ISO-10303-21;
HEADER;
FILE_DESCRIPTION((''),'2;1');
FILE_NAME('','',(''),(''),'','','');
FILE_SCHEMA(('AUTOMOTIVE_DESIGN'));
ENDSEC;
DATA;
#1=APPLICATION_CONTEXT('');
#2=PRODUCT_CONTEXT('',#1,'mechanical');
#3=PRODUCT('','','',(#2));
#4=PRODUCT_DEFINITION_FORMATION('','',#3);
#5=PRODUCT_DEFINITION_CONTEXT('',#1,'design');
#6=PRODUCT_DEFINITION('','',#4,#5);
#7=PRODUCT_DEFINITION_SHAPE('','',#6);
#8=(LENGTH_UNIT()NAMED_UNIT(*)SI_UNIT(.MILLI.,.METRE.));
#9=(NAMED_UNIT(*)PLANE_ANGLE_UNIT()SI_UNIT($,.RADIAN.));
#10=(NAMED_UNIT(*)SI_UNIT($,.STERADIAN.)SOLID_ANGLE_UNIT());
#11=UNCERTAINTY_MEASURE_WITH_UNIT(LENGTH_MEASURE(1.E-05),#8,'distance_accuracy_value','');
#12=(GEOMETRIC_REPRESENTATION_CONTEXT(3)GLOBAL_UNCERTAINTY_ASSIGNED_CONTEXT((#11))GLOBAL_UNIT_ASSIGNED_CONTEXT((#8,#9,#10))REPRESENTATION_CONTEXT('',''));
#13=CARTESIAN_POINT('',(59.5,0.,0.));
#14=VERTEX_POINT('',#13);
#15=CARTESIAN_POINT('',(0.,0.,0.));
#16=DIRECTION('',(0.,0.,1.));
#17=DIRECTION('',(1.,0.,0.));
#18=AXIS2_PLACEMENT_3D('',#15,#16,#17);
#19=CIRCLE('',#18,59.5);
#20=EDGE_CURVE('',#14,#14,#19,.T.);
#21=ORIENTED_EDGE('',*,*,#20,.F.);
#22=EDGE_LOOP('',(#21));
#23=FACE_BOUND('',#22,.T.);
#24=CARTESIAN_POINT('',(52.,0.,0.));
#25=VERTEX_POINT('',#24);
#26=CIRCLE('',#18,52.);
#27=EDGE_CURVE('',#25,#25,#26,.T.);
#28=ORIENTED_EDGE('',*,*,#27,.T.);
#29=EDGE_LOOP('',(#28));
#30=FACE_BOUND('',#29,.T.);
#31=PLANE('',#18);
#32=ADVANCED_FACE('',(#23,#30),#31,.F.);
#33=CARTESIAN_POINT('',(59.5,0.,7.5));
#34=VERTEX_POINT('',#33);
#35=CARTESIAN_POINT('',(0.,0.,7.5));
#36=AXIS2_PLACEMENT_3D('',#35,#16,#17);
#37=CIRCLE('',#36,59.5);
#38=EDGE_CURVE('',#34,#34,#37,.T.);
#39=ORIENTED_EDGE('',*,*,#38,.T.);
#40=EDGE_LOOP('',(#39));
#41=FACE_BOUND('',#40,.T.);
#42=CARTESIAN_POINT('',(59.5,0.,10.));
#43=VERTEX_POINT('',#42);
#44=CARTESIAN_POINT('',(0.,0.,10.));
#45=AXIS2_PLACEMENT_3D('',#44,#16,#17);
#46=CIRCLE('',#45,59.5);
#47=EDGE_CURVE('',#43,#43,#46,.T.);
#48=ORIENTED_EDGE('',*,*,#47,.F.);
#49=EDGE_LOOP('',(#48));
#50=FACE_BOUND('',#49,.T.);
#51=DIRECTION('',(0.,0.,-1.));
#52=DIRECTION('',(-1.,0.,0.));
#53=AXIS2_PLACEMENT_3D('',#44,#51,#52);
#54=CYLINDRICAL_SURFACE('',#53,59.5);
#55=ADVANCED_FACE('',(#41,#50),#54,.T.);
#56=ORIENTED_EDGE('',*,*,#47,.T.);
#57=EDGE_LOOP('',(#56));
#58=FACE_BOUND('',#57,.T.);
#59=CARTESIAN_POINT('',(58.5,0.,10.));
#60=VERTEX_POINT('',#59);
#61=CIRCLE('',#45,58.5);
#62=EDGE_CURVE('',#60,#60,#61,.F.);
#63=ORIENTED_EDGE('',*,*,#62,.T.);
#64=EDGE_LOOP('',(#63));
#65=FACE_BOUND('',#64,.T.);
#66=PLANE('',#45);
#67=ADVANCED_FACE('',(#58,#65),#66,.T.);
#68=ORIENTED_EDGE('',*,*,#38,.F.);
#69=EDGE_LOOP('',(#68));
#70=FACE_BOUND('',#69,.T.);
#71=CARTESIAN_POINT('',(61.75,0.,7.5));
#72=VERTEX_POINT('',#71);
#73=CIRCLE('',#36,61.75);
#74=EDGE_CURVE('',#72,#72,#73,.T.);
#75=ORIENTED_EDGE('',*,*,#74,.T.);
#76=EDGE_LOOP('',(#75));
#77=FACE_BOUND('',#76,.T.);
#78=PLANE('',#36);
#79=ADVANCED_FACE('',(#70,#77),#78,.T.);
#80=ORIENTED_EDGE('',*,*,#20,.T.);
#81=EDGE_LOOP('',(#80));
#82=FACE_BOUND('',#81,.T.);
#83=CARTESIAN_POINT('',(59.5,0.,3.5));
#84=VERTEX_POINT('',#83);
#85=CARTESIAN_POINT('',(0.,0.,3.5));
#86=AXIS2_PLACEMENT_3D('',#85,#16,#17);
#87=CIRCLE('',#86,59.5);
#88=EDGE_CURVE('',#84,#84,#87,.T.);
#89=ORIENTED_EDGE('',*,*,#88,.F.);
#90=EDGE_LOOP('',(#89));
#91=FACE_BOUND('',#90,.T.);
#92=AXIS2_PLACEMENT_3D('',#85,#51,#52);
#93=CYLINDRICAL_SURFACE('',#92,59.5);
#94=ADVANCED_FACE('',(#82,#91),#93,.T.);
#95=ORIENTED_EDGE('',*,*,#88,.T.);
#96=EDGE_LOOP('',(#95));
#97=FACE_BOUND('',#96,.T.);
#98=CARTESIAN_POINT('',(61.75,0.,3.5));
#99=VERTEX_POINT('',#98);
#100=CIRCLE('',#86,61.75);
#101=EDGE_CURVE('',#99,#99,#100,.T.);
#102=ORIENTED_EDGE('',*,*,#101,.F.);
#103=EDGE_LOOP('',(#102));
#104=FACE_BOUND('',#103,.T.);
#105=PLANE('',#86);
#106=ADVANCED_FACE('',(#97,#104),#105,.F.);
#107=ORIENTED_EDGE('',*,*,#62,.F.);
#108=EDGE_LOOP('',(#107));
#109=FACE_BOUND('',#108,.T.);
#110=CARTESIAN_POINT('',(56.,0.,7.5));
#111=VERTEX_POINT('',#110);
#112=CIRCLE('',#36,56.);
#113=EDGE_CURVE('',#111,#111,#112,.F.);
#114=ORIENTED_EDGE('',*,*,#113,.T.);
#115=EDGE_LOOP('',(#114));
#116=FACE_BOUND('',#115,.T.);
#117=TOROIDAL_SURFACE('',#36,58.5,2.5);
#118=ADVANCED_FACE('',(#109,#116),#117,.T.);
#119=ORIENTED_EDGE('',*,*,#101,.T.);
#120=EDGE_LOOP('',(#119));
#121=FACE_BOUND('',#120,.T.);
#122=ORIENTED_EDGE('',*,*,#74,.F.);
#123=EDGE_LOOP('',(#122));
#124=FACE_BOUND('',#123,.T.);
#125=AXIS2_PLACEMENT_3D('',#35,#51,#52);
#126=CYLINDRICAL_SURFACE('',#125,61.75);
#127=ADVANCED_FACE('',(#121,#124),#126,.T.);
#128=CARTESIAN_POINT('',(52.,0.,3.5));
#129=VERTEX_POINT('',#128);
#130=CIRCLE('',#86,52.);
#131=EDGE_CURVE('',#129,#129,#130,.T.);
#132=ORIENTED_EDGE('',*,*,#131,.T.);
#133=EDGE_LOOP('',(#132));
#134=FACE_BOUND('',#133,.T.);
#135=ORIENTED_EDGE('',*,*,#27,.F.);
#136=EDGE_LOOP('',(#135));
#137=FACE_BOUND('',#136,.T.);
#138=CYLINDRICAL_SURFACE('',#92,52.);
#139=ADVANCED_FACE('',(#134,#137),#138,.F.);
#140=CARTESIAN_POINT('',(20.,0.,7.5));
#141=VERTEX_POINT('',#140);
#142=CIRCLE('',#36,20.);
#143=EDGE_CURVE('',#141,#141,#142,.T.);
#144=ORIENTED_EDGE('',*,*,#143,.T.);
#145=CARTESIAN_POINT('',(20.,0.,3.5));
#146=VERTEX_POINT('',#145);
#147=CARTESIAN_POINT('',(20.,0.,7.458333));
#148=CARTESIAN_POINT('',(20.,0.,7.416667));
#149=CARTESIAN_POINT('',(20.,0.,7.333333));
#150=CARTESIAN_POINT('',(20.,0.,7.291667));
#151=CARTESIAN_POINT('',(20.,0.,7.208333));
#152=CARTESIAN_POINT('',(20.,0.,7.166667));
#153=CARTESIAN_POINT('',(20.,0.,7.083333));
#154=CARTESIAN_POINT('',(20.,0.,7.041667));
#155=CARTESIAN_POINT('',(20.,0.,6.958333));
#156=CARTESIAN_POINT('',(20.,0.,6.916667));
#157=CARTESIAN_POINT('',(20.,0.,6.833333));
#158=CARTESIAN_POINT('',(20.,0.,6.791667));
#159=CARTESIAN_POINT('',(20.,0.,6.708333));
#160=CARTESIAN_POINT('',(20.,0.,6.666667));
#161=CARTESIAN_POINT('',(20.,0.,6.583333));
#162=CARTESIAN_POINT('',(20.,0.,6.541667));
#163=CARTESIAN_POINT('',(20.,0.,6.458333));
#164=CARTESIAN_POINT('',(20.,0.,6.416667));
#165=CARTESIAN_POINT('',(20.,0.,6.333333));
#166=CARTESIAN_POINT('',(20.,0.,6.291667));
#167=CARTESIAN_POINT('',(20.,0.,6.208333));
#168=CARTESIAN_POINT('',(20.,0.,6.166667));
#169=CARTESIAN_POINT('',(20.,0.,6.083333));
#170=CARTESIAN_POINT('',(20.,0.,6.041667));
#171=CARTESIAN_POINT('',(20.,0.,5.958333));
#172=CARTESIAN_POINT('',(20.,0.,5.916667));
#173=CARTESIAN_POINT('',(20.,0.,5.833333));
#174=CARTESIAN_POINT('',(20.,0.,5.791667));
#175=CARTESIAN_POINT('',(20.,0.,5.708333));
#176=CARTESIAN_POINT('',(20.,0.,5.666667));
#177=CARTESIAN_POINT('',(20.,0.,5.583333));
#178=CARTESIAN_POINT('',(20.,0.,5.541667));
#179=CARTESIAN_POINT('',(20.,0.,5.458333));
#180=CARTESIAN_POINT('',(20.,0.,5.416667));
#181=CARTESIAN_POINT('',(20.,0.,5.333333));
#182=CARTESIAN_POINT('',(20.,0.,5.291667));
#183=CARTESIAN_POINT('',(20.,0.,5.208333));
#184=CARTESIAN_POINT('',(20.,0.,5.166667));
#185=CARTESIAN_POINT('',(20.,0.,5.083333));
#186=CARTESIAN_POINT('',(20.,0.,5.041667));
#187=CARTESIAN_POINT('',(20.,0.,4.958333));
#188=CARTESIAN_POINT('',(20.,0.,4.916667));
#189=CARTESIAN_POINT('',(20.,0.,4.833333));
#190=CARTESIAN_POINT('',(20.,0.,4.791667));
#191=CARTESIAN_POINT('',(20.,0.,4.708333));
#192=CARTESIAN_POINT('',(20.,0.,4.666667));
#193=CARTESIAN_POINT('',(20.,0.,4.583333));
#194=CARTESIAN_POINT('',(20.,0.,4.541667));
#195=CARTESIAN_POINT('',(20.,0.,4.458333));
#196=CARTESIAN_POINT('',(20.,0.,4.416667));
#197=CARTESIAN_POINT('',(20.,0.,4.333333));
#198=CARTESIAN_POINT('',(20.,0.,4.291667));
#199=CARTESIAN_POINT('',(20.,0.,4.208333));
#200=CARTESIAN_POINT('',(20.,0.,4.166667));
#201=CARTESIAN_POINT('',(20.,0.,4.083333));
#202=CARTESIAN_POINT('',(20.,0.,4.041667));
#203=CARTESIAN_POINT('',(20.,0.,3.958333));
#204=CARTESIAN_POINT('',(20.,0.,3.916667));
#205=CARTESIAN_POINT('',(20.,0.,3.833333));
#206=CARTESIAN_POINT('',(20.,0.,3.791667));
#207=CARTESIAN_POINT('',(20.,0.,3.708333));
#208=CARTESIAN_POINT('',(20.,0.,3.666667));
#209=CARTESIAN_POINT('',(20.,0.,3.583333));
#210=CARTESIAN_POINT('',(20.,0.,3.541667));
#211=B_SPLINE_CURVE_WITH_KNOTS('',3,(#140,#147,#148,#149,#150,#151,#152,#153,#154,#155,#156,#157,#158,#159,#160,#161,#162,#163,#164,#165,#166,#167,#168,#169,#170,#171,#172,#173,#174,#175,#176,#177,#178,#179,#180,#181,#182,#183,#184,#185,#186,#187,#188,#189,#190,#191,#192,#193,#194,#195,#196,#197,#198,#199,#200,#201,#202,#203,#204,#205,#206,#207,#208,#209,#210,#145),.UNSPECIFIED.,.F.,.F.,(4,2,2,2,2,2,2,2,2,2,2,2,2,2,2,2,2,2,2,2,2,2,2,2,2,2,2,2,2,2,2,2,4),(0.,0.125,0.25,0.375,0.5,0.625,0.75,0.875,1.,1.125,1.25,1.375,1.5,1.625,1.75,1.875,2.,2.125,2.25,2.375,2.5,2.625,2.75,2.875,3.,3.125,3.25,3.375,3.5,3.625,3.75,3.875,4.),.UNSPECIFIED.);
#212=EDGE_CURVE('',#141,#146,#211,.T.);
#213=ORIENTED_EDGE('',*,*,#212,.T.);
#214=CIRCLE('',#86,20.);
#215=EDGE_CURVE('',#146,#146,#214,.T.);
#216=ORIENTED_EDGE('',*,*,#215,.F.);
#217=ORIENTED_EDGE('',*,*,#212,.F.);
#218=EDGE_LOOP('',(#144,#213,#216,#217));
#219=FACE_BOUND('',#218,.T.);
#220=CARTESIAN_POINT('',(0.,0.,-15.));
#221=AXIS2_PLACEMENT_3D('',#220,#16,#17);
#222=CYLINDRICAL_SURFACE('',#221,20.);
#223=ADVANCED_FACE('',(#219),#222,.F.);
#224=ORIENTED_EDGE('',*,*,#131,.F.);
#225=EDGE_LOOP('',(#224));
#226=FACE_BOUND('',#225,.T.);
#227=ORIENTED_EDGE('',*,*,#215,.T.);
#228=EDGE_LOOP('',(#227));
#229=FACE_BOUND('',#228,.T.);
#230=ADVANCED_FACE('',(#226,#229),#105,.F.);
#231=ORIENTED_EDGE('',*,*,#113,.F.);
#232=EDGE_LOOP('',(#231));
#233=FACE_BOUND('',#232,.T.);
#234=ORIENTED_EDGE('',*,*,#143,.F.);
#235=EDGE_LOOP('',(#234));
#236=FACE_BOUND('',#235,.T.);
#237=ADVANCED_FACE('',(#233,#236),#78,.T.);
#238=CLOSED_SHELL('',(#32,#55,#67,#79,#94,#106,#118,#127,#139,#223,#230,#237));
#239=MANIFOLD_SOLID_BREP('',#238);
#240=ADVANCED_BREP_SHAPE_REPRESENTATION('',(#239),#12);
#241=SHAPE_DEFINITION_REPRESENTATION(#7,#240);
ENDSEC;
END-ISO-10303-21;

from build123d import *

# Parameters (mm, degrees)
SKETCH1_R           = 59.5
SKETCH1_R_2         = 52
BOSS_EXTRUDE1_DEPTH = 3.5
SKETCH2_R           = 61.75
BOSS_EXTRUDE2_DEPTH = 4
SKETCH3_R           = 59.5
SKETCH3_R_2         = 56
BOSS_EXTRUDE3_DEPTH = 2.5
FILLET1_R           = 2.5
SKETCH4_R           = 20
CUT_EXTRUDE1_DEPTH  = 22.5


with BuildPart() as part:
    # Sketch1 → Boss-Extrude1 (new body)
    with BuildSketch(Plane.XY):
        Circle(SKETCH1_R)
        Circle(SKETCH1_R_2, mode=Mode.SUBTRACT)
    extrude(amount=BOSS_EXTRUDE1_DEPTH)

    # Sketch2 → Boss-Extrude2 (add)
    with BuildSketch(Plane.XY.offset(3.5)):
        Circle(SKETCH2_R)
    extrude(amount=BOSS_EXTRUDE2_DEPTH)

    # Sketch3 → Boss-Extrude3 (add)
    with BuildSketch(Plane.XY.offset(7.5)):
        Circle(SKETCH3_R)
        Circle(SKETCH3_R_2, mode=Mode.SUBTRACT)
    extrude(amount=BOSS_EXTRUDE3_DEPTH)

    # Fillet1
    fillet1_edges = [part.edges().sort_by_distance(p)[0] for p in [
        (-56, 0, 10),
    ]]
    fillet(fillet1_edges, radius=FILLET1_R - 0.0001)  # a hair under: the kernel refuses the full size

    # Sketch4 → Cut-Extrude1 (cut)
    with BuildSketch(Plane.XY.offset(7.5)):
        Circle(SKETCH4_R)
    extrude(amount=-CUT_EXTRUDE1_DEPTH, mode=Mode.SUBTRACT)


solid = part.part
